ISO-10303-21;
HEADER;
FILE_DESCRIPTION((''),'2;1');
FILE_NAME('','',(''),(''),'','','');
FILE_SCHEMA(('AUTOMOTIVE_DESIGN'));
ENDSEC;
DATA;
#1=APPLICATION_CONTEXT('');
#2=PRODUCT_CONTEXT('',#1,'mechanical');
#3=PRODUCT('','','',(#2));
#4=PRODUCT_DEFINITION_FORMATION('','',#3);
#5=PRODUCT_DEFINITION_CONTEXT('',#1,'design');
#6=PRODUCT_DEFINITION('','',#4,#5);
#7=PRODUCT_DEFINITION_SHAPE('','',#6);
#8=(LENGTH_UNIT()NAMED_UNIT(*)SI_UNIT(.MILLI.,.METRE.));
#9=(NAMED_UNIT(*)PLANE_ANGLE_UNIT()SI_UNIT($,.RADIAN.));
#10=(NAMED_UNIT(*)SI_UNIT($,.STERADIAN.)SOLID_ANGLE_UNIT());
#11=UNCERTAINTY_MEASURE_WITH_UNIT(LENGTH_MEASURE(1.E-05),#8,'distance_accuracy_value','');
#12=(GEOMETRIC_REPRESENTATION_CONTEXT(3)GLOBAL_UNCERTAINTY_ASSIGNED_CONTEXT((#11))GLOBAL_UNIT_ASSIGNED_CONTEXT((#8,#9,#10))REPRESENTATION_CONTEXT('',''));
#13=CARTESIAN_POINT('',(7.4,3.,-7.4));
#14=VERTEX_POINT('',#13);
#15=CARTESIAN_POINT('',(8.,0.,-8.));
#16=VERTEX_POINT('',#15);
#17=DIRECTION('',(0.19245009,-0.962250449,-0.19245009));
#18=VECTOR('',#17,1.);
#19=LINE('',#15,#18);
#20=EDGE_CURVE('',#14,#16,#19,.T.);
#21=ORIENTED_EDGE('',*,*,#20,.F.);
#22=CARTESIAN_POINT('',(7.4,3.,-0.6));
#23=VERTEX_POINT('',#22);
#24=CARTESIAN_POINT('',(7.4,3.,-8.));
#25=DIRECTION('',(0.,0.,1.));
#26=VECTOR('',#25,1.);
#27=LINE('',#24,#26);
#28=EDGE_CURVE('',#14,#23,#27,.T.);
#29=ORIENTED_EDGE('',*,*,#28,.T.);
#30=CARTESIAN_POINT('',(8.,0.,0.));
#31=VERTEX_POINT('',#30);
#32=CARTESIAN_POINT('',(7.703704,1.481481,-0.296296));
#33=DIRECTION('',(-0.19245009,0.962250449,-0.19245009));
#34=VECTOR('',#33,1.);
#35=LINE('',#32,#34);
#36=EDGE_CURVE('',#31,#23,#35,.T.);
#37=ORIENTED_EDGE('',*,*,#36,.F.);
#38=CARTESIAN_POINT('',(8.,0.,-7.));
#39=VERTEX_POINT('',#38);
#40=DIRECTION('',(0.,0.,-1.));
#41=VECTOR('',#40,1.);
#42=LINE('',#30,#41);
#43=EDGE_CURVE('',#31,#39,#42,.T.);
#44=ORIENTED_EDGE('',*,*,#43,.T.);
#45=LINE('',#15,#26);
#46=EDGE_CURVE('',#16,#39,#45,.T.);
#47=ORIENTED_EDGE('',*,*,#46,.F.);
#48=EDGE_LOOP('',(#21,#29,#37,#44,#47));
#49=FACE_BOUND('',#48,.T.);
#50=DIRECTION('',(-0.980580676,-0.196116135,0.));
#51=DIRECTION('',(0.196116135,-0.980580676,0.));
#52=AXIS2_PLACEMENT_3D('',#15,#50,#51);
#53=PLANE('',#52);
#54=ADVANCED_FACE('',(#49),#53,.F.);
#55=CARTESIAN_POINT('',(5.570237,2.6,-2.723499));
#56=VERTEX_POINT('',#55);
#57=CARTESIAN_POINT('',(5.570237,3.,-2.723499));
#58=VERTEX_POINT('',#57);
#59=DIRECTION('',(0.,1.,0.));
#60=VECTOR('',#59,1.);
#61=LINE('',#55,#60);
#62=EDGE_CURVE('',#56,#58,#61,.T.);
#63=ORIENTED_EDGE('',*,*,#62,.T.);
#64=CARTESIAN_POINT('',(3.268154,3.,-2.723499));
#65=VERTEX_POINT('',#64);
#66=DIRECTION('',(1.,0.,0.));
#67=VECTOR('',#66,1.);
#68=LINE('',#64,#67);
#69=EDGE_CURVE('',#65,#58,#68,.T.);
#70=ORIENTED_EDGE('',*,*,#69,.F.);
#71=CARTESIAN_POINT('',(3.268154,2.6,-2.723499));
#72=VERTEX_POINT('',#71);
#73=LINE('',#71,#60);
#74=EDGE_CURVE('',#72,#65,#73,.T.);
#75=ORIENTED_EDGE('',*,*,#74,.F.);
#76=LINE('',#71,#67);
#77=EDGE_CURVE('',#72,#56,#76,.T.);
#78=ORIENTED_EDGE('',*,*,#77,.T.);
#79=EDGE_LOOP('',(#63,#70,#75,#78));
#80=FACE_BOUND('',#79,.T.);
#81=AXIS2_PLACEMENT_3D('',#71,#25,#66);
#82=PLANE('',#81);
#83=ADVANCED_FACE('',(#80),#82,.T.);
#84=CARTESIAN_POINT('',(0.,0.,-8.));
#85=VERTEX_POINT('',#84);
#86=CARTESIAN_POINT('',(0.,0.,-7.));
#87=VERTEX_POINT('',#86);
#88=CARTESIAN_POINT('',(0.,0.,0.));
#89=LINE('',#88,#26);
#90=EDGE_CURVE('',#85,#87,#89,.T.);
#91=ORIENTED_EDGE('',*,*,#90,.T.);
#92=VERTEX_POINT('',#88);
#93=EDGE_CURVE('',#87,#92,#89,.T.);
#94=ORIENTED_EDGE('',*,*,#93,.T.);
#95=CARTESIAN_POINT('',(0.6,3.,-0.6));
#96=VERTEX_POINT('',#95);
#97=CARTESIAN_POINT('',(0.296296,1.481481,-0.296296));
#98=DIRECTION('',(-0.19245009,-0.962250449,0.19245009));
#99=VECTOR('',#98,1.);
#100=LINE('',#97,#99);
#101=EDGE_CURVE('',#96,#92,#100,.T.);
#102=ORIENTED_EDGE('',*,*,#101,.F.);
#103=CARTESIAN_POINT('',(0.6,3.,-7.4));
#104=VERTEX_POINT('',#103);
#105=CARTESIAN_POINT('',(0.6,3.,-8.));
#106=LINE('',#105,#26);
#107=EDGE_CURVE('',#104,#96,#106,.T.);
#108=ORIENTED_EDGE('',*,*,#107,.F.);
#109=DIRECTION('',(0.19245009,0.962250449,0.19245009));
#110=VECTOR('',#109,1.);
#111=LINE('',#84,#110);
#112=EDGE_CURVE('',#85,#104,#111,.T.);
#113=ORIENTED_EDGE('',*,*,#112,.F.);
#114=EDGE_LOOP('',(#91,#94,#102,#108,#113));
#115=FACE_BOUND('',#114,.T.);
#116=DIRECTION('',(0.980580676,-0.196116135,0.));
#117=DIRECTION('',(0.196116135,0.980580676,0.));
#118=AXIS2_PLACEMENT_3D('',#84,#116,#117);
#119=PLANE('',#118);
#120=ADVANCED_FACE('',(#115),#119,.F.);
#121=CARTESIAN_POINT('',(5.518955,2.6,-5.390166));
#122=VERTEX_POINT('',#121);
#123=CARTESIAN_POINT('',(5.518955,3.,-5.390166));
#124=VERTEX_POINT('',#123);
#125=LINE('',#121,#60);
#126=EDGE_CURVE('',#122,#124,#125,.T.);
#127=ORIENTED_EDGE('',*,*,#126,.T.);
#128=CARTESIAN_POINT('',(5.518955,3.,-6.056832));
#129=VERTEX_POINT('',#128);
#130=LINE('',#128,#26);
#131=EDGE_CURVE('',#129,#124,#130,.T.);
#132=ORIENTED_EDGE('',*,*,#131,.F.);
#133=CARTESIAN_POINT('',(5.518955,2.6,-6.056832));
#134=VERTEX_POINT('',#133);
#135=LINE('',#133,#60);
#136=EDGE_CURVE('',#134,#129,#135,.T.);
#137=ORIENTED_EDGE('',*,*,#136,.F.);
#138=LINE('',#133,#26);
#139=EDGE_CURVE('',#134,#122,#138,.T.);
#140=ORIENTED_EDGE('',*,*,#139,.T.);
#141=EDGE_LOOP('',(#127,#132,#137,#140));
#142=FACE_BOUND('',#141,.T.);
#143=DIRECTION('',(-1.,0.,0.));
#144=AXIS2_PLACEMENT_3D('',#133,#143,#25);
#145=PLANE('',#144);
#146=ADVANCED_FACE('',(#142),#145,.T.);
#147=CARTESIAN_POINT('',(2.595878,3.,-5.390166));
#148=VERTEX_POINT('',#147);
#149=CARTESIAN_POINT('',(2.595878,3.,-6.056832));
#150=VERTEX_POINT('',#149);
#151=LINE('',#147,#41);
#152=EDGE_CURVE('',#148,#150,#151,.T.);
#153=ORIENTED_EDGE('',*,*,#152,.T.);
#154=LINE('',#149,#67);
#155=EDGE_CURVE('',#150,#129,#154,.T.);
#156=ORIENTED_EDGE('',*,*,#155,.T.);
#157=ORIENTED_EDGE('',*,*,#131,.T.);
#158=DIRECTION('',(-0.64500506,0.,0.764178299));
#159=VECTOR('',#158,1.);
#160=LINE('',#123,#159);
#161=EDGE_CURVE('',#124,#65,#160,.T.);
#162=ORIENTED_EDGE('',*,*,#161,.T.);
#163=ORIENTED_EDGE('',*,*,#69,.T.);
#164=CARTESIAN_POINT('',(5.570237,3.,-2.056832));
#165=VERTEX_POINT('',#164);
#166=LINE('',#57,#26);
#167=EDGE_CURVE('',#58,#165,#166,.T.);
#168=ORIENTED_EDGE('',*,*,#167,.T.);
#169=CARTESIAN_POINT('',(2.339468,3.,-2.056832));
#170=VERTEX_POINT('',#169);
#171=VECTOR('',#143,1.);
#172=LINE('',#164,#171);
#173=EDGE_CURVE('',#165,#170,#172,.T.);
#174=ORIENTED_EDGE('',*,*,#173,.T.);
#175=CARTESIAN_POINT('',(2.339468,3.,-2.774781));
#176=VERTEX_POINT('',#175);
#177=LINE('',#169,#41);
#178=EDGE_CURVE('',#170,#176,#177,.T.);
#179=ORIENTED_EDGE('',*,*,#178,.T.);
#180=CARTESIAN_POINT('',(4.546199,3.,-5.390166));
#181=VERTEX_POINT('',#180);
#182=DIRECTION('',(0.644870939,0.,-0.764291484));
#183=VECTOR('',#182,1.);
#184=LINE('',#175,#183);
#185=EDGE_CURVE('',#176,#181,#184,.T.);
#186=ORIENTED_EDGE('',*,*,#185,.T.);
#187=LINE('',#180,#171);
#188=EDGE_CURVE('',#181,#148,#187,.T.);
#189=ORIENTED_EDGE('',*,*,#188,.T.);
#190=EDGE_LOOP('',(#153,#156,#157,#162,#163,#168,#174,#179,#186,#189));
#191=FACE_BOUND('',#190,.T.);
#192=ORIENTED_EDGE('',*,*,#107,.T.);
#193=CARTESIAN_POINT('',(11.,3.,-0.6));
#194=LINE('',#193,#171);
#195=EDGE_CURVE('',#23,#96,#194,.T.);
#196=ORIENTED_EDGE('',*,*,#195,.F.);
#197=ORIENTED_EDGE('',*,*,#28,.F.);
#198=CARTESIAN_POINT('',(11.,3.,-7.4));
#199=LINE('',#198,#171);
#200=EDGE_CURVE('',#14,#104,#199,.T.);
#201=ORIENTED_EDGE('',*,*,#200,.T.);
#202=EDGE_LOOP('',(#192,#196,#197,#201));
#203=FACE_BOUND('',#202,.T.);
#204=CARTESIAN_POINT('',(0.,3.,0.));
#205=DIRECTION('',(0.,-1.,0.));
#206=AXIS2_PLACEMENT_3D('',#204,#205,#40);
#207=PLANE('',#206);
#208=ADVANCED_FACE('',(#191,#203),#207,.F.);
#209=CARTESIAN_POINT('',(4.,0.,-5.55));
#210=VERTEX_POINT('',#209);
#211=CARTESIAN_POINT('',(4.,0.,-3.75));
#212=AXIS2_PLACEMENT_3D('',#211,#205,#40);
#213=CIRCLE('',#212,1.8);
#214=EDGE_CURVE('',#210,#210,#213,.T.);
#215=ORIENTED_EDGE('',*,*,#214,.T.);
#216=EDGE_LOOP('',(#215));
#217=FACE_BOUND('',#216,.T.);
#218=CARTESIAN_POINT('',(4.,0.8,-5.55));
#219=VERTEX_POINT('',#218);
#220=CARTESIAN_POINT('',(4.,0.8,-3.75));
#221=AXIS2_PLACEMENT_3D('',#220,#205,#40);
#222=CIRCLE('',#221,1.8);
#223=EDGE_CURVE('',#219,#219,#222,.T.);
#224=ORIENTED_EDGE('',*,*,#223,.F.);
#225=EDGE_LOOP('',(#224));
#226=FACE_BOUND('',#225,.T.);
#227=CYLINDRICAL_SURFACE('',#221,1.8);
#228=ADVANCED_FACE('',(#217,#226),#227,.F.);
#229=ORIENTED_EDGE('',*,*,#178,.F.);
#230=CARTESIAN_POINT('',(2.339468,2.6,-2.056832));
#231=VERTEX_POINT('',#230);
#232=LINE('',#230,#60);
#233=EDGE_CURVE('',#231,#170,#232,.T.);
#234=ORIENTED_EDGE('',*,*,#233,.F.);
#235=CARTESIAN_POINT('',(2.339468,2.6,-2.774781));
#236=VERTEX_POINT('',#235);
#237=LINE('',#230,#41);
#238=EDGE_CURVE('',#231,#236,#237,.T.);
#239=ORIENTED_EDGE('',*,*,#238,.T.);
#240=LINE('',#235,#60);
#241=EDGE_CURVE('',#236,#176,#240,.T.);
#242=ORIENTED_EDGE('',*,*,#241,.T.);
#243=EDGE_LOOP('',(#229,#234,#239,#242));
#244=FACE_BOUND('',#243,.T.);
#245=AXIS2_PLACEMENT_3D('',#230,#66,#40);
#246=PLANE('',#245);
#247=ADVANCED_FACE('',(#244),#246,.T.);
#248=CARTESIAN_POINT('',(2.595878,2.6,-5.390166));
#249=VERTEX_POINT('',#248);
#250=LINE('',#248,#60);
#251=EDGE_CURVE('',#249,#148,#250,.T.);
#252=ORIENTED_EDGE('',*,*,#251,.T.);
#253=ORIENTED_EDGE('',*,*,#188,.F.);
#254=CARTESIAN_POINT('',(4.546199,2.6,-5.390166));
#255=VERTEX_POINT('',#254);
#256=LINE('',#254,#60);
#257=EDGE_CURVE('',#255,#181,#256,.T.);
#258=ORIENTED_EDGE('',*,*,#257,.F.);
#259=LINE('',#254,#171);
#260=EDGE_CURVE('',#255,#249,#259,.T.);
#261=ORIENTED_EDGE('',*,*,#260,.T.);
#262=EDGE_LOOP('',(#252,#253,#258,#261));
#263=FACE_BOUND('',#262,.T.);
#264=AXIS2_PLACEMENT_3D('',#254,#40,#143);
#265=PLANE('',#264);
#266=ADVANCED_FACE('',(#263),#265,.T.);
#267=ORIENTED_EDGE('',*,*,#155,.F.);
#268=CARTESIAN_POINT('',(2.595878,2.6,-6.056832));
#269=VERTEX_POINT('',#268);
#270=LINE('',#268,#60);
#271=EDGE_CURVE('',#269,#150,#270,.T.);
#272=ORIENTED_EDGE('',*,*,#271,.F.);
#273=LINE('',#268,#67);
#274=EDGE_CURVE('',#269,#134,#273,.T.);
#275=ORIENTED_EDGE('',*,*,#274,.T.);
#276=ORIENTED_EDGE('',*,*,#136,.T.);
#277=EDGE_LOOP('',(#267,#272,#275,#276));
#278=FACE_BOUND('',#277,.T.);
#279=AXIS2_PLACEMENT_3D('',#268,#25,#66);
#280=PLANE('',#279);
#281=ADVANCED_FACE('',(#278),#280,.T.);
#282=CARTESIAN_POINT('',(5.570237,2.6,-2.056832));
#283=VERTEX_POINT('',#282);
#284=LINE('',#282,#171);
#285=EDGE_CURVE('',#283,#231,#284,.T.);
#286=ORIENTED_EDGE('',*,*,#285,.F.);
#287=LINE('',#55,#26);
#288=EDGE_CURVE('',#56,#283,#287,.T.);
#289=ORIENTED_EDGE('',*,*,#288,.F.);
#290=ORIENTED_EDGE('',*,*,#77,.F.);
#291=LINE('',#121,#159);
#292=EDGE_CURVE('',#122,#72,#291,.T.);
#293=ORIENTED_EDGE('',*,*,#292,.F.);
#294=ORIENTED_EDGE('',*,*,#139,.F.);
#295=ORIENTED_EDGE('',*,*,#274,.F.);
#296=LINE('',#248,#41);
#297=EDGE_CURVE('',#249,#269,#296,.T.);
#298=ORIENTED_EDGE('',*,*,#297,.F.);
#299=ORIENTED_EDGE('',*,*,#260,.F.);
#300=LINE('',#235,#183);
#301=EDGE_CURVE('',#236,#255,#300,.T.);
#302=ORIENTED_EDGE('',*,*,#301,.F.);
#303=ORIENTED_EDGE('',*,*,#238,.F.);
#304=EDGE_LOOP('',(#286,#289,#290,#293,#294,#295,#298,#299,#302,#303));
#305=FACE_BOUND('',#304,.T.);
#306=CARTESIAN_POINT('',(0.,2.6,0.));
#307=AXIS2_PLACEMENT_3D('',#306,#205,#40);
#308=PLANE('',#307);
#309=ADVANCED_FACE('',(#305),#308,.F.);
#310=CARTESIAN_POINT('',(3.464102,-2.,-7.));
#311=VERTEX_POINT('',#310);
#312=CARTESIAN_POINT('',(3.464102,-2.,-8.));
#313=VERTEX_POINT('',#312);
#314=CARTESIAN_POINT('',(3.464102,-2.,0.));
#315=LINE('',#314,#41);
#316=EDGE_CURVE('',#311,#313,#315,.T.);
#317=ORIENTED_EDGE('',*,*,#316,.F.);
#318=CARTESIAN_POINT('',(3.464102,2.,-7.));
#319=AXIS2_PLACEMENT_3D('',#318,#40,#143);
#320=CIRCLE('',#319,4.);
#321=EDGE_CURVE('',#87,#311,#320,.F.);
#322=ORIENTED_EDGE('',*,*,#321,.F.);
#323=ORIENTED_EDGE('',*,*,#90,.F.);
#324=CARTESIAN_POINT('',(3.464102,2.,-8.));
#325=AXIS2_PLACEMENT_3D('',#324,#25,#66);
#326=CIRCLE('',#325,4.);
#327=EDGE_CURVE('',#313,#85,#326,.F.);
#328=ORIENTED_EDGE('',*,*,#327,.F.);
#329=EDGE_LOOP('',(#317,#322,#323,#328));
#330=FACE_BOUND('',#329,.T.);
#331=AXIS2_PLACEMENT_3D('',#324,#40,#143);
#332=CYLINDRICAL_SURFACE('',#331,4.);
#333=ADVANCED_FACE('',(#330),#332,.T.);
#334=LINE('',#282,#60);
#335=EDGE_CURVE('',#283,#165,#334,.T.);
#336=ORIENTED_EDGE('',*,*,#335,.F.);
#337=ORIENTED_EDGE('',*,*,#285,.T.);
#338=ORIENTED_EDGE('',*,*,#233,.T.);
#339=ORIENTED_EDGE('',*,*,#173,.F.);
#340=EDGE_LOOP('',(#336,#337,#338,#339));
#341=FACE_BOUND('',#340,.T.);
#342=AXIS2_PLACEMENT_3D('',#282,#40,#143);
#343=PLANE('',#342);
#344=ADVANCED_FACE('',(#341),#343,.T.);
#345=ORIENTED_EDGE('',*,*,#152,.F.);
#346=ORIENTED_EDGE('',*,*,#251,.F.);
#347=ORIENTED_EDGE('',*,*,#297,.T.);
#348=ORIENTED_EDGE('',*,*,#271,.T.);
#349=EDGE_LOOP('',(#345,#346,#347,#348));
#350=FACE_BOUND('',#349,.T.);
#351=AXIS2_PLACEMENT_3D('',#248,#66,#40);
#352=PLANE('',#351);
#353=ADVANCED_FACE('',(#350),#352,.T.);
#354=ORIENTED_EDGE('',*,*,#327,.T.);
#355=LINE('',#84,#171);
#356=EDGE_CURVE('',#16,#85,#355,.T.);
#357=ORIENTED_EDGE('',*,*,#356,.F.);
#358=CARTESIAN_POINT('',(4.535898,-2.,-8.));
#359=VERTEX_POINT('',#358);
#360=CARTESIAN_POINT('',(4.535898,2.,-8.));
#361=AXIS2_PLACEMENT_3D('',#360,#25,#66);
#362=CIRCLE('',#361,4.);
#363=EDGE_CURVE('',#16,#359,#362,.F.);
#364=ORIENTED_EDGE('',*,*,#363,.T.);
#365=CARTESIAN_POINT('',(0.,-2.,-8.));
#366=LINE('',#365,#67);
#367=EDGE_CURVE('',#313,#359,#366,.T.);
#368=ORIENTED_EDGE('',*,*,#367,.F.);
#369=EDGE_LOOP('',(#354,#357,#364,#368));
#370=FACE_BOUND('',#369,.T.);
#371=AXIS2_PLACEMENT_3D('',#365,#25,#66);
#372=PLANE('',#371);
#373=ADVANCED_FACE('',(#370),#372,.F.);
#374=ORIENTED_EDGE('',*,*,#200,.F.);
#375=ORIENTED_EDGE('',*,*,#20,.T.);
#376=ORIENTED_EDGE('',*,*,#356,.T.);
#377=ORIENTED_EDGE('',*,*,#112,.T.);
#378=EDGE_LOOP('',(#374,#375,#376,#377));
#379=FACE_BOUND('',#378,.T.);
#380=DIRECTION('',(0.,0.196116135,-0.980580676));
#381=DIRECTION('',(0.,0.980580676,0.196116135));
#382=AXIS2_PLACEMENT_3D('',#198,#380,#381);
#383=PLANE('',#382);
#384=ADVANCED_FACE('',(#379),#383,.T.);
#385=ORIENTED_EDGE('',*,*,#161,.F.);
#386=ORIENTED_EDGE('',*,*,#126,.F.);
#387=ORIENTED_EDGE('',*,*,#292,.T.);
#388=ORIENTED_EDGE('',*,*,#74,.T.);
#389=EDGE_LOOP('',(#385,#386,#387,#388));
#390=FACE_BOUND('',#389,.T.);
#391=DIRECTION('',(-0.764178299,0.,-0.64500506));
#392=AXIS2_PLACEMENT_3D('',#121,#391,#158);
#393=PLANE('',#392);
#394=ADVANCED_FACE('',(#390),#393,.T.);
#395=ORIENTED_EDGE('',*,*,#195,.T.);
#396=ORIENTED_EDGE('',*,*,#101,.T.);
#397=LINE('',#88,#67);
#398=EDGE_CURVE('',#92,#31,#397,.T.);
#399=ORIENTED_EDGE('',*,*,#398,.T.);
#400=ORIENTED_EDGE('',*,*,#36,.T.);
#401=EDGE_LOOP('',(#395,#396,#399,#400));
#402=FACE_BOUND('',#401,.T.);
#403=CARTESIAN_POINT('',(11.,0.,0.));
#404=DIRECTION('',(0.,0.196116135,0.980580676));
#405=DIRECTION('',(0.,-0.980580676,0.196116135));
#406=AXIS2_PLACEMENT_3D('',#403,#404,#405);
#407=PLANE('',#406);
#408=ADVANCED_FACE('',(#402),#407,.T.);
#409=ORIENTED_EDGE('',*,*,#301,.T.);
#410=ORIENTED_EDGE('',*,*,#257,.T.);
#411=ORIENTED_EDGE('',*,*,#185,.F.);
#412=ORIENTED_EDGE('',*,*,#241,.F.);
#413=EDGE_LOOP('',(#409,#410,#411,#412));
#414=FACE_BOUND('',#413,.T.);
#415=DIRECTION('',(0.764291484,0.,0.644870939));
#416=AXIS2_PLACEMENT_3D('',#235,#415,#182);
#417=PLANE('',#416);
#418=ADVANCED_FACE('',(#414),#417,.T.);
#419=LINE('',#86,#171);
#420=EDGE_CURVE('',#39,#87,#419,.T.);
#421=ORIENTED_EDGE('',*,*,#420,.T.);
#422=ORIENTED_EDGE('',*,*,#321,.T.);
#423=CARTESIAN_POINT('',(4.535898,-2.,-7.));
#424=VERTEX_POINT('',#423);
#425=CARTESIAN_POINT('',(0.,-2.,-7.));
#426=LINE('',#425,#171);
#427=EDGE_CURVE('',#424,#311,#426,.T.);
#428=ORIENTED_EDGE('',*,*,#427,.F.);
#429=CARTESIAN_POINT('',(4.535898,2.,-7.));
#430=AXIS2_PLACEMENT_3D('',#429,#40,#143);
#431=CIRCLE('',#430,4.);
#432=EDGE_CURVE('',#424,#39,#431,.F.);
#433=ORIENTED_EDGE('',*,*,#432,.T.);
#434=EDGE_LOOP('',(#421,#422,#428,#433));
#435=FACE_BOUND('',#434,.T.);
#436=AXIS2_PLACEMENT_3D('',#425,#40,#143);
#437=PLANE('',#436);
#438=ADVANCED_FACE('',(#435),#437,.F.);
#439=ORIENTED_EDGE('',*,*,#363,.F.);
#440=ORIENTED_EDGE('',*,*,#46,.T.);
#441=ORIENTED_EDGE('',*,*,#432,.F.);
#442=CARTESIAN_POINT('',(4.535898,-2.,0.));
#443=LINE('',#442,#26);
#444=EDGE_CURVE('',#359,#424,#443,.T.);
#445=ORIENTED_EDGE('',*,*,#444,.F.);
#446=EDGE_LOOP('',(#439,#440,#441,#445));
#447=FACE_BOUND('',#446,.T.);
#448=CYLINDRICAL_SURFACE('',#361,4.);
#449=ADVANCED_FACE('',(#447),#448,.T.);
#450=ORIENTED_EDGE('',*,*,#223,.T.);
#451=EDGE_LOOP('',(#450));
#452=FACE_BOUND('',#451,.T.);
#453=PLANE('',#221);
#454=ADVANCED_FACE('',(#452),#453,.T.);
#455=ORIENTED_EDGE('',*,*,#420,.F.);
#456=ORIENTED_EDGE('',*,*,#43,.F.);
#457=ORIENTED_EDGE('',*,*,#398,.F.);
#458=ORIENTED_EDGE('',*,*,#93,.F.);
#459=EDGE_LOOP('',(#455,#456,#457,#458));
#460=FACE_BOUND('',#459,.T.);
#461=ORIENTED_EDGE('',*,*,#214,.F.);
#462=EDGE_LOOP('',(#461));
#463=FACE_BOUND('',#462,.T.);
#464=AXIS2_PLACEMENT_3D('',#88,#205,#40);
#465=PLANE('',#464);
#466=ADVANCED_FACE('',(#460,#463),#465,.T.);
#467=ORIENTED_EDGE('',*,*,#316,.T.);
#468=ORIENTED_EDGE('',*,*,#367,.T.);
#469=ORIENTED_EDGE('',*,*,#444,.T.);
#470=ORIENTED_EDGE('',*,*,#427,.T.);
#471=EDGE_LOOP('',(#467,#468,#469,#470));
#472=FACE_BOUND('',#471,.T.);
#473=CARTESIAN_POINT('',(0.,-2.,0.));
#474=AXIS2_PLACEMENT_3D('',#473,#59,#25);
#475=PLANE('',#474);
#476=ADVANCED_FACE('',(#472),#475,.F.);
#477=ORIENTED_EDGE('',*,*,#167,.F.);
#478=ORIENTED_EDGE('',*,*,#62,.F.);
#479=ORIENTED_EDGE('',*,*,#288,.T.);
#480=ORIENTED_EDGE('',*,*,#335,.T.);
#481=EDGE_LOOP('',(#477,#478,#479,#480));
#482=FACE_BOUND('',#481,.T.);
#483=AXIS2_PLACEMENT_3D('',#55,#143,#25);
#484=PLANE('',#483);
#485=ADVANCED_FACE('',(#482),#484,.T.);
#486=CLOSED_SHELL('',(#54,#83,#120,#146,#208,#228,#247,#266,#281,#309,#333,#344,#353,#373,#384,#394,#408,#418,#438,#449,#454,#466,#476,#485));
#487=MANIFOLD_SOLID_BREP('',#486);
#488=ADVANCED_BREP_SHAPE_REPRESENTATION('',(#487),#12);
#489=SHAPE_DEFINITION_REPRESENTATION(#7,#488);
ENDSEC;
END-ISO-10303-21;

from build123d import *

# Parameters (mm, degrees)
SKETCH1_W               = 8
SKETCH1_H               = 8
BOSS_EXTRUDE1_DEPTH     = 3
CUT_EXTRUDE1_DEPTH      = 12.704699911
CUT_EXTRUDE1_DEPTH_BACK = 12.704699911
CUT_EXTRUDE2_DEPTH      = 11
SKETCH4_R               = 1.8
CUT_EXTRUDE3_DEPTH      = 0.8
SKETCH5_W               = 8
SKETCH5_H               = 1
BOSS_EXTRUDE2_DEPTH     = 2
FILLET1_R               = 4
CUT_EXTRUDE4_DEPTH      = 0.4


with BuildPart() as part:
    # Sketch1 → Boss-Extrude1 (new body)
    with BuildSketch(Plane(origin=(0, 0, 0), x_dir=(1, 0, 0), z_dir=(0, 1, 0))):
        with Locations((4, 4)):
            Rectangle(SKETCH1_W, SKETCH1_H)
    extrude(amount=BOSS_EXTRUDE1_DEPTH)

    # Sketch2 → Cut-Extrude1 (cut, two sides: drawn at the far end of the back side and taken through both)
    with BuildSketch(Plane.XY.offset(-CUT_EXTRUDE1_DEPTH_BACK)):
        Polygon((0, 0), (0.6, 3), (0, 3), align=None)
        Polygon((8, 0), (7.4, 3), (8, 3), align=None)
    extrude(amount=CUT_EXTRUDE1_DEPTH + CUT_EXTRUDE1_DEPTH_BACK, mode=Mode.SUBTRACT)

    # Sketch3 → Cut-Extrude2 (cut)
    with BuildSketch(Plane(origin=(0, 0, 0), x_dir=(0, 0, -1), z_dir=(1, 0, 0))):
        Polygon((0, 0), (0.6, 3), (0, 3), align=None)
        Polygon((8, 3), (7.4, 3), (8, 0), align=None)
    extrude(amount=CUT_EXTRUDE2_DEPTH, mode=Mode.SUBTRACT)

    # Sketch4 → Cut-Extrude3 (cut)
    with BuildSketch(Plane.XZ):
        with Locations(Location((4, -3.75, 0), (0, 0, 270))):
            Circle(SKETCH4_R)
    extrude(amount=-CUT_EXTRUDE3_DEPTH, mode=Mode.SUBTRACT)

    # Sketch5 → Boss-Extrude2 (add)
    with BuildSketch(Plane.XZ):
        with Locations((4, -7.5)):
            Rectangle(SKETCH5_W, SKETCH5_H)
    extrude(amount=BOSS_EXTRUDE2_DEPTH)

    # Fillet1
    # the kernel refuses this fillet: 4 mm, written as the material it takes off along each edge
    with BuildSketch(Plane(origin=(8, -2, -16.660254038), x_dir=(0, 1, 0), z_dir=(0, 0, 1)), Plane(origin=(0, -2, 1.660254038), x_dir=(0, 1, 0), z_dir=(0, 0, -1))) as fillet1_piece_1:
        with BuildLine():
            CenterArc((4, 3.464101615), FILLET1_R, 180, 60)
            Line((0, 3.464101615), (-0.08, 3.464101615))
            Line((-0.08, 3.464101615), (-0.08, 0))
            Line((-0.08, 0), (0, -0.08))
            ThreePointArc((0, -0.08), (1, -0.08), (1.96, -0.069282032))
            Line((1.96, -0.069282032), (2, 0))
        make_face()
    extrude(amount=18.320508076, mode=Mode.SUBTRACT)

    # Sketch6 → Cut-Extrude4 (cut)
    with BuildSketch(Plane(origin=(0, 3, 0), x_dir=(1, 0, 0), z_dir=(0, 1, 0))):
        Polygon((2.33946821, 2.056832464), (2.33946821, 2.774781182), (4.546198979, 5.390165797), (2.595878466, 5.390165797), (2.595878466, 6.056832464), (5.518955389, 6.056832464), (5.518955389, 5.390165797), (3.268154107, 2.72349913), (5.570237441, 2.72349913), (5.570237441, 2.056832464), align=None)
    extrude(amount=-CUT_EXTRUDE4_DEPTH, mode=Mode.SUBTRACT)


solid = part.part
